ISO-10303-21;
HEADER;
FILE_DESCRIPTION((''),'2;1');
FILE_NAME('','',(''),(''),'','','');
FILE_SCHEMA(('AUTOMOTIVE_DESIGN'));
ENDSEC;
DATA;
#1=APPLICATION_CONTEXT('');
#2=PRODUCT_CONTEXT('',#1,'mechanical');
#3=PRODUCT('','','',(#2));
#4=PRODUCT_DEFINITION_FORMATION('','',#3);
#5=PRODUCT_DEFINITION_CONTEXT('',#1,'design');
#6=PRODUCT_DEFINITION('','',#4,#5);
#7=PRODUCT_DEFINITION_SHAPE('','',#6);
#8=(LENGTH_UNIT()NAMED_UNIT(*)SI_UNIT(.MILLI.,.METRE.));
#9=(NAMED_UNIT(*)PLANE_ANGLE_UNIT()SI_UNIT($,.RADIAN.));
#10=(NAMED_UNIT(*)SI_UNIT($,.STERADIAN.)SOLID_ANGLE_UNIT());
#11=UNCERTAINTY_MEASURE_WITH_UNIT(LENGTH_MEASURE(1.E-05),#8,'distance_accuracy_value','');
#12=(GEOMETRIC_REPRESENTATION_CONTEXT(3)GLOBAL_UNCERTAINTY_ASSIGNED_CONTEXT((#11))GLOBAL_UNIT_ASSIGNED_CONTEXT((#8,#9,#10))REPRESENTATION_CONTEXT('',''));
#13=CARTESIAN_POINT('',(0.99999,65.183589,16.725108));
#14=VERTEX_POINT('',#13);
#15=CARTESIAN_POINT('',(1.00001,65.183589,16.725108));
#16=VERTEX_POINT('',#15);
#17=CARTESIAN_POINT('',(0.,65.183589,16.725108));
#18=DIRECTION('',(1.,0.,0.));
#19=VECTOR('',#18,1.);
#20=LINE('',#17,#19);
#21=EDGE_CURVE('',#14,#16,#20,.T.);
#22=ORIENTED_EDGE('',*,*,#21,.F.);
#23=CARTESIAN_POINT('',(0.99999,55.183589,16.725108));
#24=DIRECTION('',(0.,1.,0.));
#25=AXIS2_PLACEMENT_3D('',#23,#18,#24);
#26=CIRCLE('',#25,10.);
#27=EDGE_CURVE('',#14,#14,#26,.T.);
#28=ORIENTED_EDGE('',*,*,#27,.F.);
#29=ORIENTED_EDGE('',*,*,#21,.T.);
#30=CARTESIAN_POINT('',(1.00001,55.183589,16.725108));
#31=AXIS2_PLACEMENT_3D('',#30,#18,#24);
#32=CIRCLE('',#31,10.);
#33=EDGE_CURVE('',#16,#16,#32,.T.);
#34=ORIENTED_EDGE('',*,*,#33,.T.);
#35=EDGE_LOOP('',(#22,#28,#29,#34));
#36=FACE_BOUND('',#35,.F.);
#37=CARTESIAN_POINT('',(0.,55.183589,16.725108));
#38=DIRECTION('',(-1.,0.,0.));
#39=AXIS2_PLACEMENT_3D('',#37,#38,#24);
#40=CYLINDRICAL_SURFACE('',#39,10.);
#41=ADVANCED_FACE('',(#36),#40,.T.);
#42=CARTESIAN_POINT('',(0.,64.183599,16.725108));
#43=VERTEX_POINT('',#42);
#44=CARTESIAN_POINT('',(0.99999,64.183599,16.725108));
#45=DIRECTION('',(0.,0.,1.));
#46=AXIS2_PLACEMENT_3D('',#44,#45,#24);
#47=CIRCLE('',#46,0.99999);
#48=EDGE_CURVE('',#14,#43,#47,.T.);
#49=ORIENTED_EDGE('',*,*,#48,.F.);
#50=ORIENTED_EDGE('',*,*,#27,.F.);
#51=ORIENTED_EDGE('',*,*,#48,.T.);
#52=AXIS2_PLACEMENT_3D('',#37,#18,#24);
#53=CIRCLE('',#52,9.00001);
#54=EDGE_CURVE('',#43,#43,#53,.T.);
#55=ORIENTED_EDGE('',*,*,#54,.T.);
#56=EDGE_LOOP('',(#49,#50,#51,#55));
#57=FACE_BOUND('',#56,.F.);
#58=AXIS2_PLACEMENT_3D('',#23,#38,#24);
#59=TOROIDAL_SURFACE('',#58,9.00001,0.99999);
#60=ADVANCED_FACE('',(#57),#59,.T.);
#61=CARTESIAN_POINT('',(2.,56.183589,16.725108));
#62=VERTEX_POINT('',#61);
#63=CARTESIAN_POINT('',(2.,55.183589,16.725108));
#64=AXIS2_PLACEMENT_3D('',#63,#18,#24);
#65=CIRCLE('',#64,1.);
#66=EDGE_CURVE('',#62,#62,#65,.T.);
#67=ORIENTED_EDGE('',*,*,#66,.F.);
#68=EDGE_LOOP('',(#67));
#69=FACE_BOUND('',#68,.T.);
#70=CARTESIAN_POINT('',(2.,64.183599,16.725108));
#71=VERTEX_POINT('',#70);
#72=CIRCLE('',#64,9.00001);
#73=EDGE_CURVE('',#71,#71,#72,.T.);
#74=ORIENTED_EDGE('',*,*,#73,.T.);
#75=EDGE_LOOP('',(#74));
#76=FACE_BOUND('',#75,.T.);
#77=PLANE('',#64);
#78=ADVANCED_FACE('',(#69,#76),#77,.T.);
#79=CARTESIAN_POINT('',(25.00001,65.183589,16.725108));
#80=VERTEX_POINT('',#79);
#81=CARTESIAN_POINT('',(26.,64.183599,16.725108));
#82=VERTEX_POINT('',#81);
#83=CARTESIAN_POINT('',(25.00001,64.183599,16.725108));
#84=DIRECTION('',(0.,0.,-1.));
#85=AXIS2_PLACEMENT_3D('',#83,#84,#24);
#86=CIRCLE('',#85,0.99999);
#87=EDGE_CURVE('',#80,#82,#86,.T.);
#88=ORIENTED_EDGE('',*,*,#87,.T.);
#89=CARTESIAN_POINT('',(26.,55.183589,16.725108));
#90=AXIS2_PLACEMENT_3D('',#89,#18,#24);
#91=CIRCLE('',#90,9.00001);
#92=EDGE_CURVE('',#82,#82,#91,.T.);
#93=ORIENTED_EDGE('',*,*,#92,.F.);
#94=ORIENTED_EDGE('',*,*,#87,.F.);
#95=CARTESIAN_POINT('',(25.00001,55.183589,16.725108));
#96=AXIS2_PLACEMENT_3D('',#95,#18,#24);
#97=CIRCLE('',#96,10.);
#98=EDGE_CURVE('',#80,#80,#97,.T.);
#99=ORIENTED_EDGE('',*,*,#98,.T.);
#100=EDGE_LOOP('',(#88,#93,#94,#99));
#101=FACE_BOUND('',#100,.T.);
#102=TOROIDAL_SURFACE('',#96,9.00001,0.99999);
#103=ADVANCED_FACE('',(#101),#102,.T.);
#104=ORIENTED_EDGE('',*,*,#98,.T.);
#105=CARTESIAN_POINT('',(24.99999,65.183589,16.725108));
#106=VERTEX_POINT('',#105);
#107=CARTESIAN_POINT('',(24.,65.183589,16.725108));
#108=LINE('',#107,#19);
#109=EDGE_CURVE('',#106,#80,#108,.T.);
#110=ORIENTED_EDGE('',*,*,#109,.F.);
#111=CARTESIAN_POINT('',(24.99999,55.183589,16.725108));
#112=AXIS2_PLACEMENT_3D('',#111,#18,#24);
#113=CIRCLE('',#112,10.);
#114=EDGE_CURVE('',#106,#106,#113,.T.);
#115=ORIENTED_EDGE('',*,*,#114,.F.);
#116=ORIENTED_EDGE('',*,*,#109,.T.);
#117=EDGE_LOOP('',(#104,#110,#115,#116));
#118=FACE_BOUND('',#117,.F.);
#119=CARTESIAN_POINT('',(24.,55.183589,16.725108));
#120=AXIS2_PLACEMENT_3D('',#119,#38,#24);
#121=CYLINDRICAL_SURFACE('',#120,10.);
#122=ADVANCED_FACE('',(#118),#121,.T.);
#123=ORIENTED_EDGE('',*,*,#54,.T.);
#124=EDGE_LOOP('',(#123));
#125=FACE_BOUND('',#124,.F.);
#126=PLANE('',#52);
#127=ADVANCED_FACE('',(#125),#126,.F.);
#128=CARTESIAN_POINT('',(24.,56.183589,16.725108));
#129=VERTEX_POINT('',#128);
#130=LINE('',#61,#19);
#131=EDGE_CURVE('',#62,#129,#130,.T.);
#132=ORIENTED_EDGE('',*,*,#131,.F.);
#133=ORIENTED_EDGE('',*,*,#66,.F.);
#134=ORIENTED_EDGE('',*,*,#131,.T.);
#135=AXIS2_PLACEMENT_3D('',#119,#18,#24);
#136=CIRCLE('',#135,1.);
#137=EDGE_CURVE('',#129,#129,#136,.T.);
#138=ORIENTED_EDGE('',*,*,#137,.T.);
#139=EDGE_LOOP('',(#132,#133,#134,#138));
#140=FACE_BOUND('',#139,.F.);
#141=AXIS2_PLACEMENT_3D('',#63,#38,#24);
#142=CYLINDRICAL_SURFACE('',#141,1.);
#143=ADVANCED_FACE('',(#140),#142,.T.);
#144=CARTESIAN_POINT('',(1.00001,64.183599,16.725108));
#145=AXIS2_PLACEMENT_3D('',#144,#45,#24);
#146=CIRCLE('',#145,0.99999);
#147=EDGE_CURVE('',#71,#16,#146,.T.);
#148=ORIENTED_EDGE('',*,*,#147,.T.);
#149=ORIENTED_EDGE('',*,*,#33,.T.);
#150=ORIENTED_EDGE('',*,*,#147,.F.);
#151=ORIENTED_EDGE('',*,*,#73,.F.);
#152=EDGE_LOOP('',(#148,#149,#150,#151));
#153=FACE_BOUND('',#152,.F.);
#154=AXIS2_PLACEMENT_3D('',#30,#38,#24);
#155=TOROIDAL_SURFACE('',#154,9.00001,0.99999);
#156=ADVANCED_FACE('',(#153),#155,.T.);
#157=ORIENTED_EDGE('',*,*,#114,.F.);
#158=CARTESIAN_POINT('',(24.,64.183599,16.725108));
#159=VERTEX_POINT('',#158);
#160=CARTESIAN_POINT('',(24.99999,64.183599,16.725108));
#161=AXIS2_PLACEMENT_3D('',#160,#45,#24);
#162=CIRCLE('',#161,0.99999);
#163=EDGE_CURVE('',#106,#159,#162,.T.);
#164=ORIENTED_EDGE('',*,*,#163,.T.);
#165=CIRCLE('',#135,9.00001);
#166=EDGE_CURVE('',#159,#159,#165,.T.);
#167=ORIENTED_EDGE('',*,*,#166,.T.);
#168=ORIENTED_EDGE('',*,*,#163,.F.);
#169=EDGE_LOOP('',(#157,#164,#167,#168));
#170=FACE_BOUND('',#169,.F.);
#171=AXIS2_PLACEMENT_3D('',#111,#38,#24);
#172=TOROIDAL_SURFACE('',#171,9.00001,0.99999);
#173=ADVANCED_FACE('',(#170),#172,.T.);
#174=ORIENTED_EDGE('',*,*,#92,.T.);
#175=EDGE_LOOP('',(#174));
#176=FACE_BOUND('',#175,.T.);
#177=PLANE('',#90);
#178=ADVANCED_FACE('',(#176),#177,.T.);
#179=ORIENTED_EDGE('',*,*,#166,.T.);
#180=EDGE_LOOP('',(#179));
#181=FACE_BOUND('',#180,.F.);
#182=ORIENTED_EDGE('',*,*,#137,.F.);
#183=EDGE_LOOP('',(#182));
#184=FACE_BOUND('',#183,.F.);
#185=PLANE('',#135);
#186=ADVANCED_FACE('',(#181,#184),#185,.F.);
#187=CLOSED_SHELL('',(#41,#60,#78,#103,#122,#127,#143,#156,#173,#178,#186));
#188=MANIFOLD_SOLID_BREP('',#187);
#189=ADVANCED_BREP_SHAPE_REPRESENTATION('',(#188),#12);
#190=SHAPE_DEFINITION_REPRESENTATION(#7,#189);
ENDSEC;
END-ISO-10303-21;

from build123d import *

# Parameters (mm, degrees)
F0_R     = 10
F1_DEPTH = 2
F2_R     = 1
F3_DEPTH = 22
F4_R     = 10
F5_DEPTH = 2
F6_R     = 0.99999


# Not quite as in the source:
# - a fillet or chamfer is up to 0.001 mm smaller than in the source, because OpenCascade refuses the exact size


with BuildPart() as f1:
    # F0 (on Right) → F1 (new body)
    with BuildSketch(Plane.YZ):
        with Locations((55.1835894585, 16.7251080275)):
            Circle(F0_R)
    extrude(amount=F1_DEPTH)

    # F2 (on face) → F3 (join)
    with BuildSketch(Plane.YZ.offset(2)):
        with Locations((55.1835894585, 16.7251080275)):
            Circle(F2_R)
    extrude(amount=F3_DEPTH)

    # F4 (on face) → F5 (join)
    with BuildSketch(Plane.YZ.offset(24)):
        with Locations((55.1835894585, 16.7251080275)):
            Circle(F4_R)
    extrude(amount=F5_DEPTH)

    # F6 (radius 1 in the source; OpenCascade refuses exactly that, so slightly less here)
    f6_edges = [f1.edges().sort_by_distance(p)[0] for p in [
        (2, 45.183589, 16.725108),
        (0, 45.183589, 16.725108),
        (26, 45.183589, 16.725108),
        (24, 45.183589, 16.725108),
    ]]
    fillet(f6_edges, radius=F6_R)


solid = f1.part
